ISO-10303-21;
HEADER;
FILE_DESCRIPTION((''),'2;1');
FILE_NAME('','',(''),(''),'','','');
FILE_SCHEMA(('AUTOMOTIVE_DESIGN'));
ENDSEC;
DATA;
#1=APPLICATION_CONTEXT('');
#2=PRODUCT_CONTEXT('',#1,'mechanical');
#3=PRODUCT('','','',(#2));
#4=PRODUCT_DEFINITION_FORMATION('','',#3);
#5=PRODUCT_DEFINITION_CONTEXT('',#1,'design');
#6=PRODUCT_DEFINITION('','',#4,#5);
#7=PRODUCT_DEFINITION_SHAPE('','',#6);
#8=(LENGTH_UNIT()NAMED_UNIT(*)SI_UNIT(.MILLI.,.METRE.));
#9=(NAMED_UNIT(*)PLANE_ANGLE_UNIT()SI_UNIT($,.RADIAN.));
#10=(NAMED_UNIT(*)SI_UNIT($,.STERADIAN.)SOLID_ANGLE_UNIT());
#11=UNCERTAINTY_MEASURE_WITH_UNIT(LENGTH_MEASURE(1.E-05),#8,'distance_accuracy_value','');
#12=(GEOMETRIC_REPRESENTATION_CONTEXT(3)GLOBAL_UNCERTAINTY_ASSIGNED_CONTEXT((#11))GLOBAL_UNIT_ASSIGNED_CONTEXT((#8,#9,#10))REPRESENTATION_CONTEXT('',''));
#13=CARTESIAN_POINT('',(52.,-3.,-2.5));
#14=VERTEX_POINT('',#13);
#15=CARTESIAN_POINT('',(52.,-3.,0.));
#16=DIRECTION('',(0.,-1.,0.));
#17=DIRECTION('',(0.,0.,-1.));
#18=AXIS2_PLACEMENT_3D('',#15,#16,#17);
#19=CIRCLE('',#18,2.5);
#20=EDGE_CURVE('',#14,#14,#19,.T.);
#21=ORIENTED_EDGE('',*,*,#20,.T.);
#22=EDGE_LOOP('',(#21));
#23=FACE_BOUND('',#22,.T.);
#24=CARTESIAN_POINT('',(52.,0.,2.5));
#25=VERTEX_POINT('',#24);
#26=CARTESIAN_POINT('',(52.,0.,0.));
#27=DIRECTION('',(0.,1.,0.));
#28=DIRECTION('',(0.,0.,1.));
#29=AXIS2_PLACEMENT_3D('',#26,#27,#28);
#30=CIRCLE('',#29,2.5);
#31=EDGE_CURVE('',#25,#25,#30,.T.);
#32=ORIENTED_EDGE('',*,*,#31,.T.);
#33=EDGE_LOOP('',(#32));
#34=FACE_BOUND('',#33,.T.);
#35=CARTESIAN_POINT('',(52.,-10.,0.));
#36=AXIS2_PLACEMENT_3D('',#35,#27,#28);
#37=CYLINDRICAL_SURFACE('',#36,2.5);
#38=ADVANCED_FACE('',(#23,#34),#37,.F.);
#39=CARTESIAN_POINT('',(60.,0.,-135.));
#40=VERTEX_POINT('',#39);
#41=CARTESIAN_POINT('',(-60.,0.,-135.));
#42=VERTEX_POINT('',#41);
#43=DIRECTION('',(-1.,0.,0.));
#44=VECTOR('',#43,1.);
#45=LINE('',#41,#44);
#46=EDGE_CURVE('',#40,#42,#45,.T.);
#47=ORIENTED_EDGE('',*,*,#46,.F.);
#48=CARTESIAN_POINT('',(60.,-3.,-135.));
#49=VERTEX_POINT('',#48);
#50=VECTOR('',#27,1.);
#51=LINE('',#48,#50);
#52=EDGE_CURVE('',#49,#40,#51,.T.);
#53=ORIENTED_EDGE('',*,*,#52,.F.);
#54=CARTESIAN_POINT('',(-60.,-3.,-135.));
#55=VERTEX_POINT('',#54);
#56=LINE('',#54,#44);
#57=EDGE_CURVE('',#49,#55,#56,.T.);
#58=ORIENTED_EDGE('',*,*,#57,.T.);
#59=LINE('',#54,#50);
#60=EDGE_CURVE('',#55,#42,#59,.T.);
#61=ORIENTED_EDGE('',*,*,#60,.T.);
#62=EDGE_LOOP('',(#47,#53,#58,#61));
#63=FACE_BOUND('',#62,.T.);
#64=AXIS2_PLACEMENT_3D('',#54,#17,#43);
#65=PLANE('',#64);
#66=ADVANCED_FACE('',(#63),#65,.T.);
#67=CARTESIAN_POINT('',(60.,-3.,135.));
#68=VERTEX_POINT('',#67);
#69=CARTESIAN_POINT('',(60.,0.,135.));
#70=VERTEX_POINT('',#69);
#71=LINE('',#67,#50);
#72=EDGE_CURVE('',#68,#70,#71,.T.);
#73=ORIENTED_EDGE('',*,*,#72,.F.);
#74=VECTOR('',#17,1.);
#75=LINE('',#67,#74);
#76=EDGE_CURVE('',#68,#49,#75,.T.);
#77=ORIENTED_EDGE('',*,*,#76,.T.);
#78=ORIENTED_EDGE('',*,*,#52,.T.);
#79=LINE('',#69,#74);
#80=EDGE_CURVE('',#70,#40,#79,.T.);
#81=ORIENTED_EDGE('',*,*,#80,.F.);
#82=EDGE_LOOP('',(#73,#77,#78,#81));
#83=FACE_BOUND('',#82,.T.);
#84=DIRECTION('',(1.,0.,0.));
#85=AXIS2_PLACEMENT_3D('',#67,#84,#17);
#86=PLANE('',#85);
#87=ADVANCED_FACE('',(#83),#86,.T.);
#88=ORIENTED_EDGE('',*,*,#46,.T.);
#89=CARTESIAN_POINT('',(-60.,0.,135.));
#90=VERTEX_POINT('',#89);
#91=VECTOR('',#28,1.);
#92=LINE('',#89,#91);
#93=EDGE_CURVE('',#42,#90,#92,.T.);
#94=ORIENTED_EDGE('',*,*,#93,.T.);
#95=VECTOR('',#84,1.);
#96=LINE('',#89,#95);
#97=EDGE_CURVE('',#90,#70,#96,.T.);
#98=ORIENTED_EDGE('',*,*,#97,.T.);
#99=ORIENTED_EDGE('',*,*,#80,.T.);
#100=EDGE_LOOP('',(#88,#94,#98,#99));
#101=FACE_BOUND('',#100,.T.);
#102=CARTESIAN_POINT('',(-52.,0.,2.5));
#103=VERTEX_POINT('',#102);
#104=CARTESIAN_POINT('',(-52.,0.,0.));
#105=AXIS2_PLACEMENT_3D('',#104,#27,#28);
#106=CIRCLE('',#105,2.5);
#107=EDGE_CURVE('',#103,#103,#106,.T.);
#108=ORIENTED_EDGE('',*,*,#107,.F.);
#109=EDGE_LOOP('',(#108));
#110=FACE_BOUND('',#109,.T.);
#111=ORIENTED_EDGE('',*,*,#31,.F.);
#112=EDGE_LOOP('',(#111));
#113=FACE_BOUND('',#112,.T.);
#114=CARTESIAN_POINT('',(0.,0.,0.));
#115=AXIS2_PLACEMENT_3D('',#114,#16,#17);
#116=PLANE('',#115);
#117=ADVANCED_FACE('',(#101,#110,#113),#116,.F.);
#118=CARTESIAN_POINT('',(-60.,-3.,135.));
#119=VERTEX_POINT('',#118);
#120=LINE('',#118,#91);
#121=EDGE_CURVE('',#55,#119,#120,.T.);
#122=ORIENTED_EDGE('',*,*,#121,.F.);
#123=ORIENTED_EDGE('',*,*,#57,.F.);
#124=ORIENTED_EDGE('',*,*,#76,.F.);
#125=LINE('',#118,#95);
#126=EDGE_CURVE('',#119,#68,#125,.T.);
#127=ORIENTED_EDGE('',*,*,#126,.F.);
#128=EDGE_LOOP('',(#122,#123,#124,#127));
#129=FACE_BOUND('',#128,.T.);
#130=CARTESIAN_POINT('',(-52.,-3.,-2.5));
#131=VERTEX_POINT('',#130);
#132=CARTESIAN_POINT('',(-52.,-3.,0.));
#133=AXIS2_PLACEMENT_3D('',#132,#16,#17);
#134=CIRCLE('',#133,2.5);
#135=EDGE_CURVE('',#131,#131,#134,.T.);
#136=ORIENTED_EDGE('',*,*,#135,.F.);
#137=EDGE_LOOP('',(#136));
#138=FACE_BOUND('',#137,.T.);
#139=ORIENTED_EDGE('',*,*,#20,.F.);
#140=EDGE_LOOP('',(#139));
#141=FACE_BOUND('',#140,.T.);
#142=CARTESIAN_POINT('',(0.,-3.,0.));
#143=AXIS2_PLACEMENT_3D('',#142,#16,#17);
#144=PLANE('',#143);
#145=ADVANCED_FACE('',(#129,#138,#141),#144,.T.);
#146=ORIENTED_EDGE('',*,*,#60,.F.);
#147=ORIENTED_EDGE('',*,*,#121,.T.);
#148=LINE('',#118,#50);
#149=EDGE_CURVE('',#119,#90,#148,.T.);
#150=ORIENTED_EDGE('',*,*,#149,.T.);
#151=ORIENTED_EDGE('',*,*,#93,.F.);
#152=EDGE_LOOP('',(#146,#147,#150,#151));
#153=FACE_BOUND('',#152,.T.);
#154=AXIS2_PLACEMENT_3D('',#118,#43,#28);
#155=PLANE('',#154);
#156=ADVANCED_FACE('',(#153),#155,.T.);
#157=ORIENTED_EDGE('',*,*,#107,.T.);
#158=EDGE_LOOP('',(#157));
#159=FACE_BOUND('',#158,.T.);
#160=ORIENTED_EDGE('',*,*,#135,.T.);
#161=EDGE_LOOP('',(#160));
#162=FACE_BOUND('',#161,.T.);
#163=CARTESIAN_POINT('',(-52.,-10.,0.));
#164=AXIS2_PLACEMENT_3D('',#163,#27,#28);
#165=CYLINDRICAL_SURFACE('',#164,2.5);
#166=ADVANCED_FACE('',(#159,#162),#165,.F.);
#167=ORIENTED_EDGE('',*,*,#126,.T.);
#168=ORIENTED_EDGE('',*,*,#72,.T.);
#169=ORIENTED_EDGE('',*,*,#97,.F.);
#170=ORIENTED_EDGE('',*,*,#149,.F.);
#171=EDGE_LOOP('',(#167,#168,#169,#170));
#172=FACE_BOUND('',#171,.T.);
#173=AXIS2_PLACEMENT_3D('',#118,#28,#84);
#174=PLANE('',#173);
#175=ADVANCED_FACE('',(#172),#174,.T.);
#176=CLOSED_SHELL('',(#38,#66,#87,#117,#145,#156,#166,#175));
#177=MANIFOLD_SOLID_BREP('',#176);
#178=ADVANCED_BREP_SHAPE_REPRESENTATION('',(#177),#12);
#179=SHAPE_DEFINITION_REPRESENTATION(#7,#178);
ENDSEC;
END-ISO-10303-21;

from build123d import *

# Parameters (mm, degrees)
SKETCH1_W          = 120
SKETCH1_H          = 270
BASE_FLANGE1_DEPTH = 3
SKETCH6_R          = 2.5
CUT_EXTRUDE1_DEPTH = 10


# Sheet-metal steps are written as plain solids
with BuildPart() as part:
    # Sketch1 → Base-Flange1 (new body)
    with BuildSketch(Plane(origin=(0, 0, 0), x_dir=(1, 0, 0), z_dir=(0, 1, 0))):
        Rectangle(SKETCH1_W, SKETCH1_H)
    extrude(amount=-BASE_FLANGE1_DEPTH)

    # Sketch6 → Cut-Extrude1 (cut)
    with BuildSketch(Plane(origin=(0, 0, 0), x_dir=(1, 0, 0), z_dir=(0, 1, 0))):
        with Locations(Location((-52, 0, 0), (0, 0, 270))):
            Circle(SKETCH6_R)
        with Locations(Location((52, 0, 0), (0, 0, 270))):
            Circle(SKETCH6_R)
    extrude(amount=-CUT_EXTRUDE1_DEPTH, mode=Mode.SUBTRACT)


solid = part.part
